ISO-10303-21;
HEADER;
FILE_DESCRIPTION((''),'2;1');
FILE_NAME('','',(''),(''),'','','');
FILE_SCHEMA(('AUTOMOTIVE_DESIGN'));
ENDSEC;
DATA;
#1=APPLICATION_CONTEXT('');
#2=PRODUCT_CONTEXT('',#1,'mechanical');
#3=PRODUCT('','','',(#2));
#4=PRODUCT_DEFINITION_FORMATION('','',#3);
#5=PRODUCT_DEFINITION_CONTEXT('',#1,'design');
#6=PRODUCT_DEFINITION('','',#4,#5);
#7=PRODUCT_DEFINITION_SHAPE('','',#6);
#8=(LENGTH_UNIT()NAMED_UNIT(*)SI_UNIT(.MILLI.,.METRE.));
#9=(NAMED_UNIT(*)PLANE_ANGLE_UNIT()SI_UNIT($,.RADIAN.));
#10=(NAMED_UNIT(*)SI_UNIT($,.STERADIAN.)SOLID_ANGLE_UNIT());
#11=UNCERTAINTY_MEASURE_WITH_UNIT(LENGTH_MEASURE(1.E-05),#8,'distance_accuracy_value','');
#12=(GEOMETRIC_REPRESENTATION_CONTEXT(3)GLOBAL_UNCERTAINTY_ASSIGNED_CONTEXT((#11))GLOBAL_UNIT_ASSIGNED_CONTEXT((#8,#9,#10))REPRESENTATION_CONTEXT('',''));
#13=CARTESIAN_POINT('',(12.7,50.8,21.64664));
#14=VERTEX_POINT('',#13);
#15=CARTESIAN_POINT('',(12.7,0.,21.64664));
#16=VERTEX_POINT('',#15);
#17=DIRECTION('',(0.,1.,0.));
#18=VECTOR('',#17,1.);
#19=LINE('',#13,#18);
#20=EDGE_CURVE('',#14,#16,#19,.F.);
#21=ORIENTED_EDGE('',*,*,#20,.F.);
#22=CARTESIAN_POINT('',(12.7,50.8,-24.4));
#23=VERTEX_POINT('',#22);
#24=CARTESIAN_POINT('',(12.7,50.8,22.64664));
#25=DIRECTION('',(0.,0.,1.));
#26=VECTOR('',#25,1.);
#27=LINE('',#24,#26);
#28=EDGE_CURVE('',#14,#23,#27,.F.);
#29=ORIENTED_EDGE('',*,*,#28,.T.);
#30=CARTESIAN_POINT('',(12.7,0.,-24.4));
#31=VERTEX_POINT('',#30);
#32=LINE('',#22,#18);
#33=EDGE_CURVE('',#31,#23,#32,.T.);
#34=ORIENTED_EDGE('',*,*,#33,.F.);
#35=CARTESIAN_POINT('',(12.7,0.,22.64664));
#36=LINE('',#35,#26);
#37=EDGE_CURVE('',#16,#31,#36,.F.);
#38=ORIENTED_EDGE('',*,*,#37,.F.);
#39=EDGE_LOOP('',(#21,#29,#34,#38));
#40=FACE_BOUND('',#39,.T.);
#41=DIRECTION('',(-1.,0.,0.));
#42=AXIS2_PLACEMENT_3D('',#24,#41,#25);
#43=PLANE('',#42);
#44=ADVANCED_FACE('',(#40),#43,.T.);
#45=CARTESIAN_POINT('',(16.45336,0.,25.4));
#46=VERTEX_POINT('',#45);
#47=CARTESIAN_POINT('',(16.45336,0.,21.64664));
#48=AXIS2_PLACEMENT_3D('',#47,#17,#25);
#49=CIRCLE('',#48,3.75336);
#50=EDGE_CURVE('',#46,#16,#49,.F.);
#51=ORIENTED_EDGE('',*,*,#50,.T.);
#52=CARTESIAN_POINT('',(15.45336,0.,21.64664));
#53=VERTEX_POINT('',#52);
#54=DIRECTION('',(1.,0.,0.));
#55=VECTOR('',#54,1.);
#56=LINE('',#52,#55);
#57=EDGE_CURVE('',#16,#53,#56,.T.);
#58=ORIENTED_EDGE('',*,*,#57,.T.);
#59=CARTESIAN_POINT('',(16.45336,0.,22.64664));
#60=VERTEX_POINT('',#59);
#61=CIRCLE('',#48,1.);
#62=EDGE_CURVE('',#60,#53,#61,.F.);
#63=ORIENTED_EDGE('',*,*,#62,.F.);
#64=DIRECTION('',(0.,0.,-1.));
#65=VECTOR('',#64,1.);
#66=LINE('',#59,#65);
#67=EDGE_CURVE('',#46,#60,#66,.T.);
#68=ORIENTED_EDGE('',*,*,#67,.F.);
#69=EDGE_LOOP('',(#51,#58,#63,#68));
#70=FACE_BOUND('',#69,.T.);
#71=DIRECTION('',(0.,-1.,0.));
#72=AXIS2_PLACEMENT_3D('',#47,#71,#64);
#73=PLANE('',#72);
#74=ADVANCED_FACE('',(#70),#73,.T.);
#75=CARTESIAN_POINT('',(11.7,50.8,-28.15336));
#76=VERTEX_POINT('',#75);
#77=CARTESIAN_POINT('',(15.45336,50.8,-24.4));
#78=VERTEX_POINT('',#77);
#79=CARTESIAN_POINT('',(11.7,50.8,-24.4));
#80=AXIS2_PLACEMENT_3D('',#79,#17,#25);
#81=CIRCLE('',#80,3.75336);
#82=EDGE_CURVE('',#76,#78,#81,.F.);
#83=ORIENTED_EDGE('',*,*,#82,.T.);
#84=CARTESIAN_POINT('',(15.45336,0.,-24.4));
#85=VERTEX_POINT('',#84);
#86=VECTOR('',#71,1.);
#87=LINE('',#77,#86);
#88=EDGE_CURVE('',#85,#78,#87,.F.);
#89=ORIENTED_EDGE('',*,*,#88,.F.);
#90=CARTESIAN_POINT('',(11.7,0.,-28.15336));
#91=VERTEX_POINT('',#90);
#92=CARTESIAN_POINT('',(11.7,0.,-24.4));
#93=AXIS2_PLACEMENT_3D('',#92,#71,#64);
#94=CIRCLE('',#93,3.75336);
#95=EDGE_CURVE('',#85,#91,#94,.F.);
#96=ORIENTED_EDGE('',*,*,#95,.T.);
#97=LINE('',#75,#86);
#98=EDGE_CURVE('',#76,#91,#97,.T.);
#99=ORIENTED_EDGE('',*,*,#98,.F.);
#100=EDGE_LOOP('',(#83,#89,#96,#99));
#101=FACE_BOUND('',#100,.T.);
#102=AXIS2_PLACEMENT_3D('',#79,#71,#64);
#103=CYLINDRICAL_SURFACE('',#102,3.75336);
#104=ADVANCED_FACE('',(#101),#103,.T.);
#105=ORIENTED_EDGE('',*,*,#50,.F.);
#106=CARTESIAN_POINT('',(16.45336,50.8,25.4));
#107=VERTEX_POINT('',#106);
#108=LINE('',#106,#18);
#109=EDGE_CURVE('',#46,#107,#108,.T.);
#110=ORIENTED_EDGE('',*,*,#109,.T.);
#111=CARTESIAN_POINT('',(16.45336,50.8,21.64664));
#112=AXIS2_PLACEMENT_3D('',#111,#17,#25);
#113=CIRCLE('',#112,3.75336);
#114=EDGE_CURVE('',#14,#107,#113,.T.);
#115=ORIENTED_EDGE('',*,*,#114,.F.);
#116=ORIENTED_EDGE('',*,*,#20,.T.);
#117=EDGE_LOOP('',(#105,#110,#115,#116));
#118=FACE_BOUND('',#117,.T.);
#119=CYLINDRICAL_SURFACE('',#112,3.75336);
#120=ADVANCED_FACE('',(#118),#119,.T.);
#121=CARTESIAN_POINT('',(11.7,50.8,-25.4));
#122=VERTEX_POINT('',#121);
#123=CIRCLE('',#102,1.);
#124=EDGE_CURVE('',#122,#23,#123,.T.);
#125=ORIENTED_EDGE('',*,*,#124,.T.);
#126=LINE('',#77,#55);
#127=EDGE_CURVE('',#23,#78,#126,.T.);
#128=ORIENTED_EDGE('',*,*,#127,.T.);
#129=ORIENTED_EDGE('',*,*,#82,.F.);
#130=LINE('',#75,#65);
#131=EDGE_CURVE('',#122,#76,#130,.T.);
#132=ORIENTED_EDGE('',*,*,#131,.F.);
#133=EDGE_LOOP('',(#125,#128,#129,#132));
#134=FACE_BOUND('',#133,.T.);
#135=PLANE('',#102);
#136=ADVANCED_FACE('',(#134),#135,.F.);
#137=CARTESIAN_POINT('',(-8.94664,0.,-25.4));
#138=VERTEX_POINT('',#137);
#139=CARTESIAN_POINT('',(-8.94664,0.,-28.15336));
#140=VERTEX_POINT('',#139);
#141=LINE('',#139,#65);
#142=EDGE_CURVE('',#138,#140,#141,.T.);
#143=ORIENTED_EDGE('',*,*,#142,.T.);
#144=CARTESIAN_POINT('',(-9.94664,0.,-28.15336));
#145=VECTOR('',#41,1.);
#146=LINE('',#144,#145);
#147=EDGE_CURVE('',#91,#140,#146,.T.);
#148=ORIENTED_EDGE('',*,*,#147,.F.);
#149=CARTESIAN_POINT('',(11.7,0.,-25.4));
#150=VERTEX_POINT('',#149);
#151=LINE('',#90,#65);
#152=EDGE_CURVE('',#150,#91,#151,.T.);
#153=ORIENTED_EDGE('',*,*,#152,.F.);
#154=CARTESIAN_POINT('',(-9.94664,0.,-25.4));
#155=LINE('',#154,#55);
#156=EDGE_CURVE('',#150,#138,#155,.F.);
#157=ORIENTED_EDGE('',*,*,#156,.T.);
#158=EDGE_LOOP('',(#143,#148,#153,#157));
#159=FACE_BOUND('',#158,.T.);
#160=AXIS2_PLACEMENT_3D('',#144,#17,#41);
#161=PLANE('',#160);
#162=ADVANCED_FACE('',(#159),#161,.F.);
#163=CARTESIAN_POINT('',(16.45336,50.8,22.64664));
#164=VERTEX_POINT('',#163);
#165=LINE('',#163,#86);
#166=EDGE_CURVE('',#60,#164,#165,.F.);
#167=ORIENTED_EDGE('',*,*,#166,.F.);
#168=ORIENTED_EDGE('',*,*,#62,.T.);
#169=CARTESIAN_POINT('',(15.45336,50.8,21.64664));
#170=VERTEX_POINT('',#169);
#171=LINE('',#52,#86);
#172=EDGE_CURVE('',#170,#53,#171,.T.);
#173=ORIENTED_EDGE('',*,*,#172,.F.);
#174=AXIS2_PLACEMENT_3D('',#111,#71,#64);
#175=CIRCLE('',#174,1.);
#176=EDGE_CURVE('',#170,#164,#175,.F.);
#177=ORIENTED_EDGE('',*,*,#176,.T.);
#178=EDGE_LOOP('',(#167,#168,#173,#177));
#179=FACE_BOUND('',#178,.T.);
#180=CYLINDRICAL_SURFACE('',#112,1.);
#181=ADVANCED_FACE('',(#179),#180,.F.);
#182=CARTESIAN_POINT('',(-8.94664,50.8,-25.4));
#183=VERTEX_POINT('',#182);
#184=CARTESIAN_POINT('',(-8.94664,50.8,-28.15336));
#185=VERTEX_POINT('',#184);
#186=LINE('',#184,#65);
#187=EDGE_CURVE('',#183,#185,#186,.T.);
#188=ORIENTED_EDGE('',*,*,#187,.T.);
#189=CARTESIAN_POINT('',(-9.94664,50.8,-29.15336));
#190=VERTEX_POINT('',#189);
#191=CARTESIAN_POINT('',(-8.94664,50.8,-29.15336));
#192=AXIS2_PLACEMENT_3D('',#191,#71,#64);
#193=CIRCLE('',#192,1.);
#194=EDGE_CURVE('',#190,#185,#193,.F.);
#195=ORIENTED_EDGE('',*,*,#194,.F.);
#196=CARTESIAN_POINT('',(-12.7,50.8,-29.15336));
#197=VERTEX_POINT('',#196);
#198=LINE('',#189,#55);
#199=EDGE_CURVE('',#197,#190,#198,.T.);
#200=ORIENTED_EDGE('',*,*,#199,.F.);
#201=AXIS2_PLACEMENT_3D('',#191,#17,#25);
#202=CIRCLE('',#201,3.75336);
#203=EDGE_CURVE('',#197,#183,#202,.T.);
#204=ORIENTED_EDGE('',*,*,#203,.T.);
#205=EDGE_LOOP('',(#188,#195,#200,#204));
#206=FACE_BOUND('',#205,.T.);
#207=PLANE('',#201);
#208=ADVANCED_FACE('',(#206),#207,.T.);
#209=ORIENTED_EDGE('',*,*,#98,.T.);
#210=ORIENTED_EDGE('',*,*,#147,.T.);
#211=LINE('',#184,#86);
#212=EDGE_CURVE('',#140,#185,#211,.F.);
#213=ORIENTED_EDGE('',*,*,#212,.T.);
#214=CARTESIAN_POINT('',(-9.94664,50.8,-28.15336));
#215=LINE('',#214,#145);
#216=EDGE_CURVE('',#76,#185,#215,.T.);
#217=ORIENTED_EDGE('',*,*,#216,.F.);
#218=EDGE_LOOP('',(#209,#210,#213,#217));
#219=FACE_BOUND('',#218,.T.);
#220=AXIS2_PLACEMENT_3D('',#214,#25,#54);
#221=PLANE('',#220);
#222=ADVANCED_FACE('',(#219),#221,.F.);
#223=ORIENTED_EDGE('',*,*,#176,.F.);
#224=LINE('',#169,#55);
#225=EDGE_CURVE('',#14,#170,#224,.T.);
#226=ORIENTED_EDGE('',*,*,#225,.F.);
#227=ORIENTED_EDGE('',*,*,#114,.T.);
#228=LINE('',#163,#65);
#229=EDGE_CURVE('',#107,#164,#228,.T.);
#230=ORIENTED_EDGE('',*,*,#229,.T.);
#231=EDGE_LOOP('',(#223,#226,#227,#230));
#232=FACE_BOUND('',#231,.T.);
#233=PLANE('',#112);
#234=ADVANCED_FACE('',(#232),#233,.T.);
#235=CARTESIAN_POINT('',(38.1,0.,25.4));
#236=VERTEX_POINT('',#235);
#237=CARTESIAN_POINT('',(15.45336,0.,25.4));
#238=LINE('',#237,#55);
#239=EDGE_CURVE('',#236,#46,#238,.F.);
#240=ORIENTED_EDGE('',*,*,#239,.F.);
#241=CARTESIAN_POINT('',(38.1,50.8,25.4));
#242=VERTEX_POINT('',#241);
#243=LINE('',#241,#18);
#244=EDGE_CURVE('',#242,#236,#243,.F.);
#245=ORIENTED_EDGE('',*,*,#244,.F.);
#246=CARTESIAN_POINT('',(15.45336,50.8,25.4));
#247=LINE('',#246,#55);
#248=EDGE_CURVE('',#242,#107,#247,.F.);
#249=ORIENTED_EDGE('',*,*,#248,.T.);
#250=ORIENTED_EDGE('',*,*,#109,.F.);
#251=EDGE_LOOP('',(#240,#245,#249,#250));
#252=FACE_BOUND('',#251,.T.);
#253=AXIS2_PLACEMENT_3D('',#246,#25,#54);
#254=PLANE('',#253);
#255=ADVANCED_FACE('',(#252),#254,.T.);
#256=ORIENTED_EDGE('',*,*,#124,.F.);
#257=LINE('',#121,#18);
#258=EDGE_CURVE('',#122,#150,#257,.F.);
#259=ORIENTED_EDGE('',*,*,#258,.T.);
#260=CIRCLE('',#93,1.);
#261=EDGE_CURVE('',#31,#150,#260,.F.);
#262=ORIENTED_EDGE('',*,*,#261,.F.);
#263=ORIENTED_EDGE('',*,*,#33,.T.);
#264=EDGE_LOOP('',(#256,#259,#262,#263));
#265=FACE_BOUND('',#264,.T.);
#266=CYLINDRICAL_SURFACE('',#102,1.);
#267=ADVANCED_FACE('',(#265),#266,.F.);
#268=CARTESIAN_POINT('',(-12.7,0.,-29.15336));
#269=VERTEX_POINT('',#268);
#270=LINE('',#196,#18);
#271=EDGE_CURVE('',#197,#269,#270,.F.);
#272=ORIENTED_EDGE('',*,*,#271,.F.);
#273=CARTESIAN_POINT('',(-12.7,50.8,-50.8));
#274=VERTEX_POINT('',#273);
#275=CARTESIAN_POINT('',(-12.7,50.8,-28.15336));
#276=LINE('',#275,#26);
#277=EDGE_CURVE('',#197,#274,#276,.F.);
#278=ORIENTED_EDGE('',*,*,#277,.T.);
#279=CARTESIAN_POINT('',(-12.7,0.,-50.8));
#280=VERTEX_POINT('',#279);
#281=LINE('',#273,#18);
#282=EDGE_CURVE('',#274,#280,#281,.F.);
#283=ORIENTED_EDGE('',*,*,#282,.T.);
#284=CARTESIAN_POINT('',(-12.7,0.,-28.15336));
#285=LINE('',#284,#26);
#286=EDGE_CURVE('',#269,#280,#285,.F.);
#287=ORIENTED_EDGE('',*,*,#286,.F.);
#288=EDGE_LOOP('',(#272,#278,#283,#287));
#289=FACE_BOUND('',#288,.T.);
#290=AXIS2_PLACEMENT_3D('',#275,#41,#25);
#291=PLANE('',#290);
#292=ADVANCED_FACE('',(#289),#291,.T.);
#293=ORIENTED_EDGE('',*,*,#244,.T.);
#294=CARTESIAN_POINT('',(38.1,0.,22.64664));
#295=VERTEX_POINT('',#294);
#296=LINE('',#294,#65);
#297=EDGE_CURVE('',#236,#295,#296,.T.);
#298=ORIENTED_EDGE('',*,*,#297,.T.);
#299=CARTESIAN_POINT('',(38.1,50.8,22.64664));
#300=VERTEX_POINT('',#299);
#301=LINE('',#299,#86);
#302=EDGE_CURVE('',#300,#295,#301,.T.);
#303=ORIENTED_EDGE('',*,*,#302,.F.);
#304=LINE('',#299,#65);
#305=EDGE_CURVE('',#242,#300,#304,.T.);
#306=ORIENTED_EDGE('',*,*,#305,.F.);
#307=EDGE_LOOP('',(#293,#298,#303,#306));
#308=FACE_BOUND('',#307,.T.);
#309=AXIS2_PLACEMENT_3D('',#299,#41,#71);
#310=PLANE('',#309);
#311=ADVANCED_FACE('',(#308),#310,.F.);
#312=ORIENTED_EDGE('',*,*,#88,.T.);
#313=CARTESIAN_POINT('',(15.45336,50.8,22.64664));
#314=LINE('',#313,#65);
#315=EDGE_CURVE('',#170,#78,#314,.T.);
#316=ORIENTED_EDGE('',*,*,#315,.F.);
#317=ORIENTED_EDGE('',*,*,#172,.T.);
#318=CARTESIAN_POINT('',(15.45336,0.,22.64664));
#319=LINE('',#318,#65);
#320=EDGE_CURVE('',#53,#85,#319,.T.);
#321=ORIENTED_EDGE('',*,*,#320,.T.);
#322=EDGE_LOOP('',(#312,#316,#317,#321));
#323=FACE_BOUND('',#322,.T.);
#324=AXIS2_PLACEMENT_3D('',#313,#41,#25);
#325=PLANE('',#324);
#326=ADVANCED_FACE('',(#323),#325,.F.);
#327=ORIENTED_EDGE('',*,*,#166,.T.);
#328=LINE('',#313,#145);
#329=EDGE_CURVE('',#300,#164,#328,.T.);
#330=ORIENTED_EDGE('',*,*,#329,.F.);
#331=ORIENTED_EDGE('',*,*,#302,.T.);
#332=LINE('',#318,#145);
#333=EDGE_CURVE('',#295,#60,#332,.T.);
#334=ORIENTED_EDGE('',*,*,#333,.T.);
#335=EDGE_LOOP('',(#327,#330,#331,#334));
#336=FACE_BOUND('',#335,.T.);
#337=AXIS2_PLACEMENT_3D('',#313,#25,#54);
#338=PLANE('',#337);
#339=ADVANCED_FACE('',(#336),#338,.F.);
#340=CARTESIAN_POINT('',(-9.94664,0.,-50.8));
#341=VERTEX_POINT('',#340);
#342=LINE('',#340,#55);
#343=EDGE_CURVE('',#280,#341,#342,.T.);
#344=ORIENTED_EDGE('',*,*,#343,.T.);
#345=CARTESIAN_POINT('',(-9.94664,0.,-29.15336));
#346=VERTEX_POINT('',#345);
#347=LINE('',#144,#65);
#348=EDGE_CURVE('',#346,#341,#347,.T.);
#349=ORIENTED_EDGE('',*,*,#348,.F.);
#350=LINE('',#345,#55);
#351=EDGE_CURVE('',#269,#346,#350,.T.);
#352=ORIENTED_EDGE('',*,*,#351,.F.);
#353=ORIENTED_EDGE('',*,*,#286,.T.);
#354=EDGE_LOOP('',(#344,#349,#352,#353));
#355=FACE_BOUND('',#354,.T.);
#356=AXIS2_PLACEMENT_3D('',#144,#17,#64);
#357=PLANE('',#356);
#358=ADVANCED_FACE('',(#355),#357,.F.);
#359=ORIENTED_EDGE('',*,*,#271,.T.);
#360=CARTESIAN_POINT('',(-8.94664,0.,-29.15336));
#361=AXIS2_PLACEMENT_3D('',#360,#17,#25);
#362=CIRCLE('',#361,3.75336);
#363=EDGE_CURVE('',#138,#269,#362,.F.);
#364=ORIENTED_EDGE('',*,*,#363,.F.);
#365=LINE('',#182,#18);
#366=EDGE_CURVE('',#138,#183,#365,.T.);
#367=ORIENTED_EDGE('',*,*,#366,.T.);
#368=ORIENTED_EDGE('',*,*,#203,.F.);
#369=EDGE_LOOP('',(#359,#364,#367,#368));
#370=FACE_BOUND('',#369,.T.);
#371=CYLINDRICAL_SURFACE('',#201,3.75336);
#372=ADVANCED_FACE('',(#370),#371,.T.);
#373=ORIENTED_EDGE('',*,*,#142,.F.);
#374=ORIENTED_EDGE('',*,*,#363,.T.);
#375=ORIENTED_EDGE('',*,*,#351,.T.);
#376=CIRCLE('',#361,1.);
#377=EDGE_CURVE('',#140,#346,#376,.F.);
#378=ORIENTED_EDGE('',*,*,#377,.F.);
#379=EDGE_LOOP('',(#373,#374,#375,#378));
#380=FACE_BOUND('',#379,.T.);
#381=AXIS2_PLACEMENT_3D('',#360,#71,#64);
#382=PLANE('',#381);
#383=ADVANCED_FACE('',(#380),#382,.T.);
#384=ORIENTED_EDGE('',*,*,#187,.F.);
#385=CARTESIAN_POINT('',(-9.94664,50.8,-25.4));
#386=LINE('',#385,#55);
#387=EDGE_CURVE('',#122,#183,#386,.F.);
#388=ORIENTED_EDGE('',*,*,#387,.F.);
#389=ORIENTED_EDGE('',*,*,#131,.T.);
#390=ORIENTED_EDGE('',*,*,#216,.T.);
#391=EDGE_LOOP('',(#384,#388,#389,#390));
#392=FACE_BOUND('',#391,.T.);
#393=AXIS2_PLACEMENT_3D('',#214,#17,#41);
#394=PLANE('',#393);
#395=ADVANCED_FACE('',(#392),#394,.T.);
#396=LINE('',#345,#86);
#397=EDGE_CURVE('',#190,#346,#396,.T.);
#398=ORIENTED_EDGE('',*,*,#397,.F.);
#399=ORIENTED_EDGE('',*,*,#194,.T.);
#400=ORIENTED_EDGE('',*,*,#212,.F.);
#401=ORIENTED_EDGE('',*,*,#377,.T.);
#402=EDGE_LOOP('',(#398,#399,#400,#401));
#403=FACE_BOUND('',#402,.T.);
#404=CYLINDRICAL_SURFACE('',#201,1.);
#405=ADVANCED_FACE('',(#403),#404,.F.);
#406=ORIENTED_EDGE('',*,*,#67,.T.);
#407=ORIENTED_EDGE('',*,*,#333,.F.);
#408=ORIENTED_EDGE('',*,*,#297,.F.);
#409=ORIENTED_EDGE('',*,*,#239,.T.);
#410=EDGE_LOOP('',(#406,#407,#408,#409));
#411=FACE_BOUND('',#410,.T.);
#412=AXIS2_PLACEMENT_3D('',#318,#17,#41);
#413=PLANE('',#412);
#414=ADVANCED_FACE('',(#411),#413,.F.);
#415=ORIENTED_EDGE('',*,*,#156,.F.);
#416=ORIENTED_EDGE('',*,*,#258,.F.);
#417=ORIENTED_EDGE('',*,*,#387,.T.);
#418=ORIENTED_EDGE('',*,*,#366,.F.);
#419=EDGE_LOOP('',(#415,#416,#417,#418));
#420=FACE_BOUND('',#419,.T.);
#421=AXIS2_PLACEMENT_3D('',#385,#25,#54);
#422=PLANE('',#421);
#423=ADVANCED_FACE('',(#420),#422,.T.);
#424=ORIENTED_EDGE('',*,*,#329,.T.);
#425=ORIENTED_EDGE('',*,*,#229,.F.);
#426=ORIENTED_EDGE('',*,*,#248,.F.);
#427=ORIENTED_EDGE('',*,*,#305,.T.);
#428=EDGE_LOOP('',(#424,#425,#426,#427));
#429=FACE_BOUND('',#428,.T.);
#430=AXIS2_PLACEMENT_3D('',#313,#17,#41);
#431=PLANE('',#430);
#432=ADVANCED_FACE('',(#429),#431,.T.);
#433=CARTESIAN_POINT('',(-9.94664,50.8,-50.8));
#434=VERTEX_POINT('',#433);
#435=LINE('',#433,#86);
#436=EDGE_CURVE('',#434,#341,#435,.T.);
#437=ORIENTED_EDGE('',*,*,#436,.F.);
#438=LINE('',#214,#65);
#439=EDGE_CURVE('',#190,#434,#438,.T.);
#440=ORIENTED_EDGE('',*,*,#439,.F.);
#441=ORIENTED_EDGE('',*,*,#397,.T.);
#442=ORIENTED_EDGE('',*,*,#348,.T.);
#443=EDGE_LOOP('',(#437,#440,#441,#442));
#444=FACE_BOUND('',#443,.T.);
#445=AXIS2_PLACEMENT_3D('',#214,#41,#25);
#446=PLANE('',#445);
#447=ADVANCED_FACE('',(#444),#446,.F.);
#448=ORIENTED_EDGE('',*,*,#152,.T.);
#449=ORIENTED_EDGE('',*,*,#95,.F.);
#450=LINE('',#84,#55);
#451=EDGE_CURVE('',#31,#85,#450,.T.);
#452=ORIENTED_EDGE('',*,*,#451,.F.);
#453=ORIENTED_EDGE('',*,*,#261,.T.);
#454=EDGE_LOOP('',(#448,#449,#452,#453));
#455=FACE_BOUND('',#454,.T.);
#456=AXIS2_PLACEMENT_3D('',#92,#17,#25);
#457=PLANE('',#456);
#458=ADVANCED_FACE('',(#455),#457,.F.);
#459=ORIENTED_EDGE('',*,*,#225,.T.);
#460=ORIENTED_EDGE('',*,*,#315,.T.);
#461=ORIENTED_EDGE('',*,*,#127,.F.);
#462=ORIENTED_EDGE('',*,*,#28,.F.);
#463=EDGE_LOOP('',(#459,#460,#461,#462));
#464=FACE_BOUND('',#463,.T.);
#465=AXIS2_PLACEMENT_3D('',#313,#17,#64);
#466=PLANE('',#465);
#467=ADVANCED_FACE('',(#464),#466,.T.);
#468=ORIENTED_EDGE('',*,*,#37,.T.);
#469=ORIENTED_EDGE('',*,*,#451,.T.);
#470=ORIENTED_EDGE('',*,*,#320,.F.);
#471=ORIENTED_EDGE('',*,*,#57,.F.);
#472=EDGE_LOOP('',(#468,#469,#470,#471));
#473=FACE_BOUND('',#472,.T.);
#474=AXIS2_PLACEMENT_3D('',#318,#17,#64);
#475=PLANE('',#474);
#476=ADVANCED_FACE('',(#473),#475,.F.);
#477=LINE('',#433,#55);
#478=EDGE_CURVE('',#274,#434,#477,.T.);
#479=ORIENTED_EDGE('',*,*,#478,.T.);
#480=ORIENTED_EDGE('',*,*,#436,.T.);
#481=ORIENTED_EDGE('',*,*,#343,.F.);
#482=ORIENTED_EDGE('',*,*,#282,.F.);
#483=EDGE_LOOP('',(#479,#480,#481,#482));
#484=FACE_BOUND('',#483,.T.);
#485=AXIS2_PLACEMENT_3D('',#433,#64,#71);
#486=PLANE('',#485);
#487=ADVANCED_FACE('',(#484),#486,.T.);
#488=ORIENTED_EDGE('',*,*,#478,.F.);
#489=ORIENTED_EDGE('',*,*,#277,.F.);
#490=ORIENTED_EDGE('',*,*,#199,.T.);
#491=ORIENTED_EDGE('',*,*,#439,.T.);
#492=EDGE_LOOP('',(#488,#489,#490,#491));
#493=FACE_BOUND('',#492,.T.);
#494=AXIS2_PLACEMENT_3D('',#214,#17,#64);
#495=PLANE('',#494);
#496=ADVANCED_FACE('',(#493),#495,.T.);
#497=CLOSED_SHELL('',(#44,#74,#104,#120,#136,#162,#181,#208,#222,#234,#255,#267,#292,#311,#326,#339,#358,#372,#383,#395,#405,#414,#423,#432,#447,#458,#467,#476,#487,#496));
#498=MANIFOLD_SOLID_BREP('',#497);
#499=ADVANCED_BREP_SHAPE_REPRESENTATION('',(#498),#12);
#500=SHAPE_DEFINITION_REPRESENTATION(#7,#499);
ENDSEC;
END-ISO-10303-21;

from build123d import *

# Parameters (mm, degrees)
BOSS_EXTRUDE1_DEPTH    = 50.8
CONVERT_SOLID3_DEPTH   = 50.8
CONVERT_SOLID3_2_DEPTH = 50.8


# Read off the part's stored shape, not the designer's step: Convert-Solid3
with BuildPart() as part:
    # Sketch1 → Boss-Extrude1 (new body)
    with BuildSketch(Plane(origin=(0, 0, 0), x_dir=(1, 0, 0), z_dir=(0, 1, 0))):
        Polygon((-9.94664, 28.15336), (15.45336, 28.15336), (15.45336, -22.64664), (38.1, -22.64664), (38.1, -25.4), (12.7, -25.4), (12.7, 25.4), (-12.7, 25.4), (-12.7, 50.8), (-9.94664, 50.8), align=None)
    extrude(amount=BOSS_EXTRUDE1_DEPTH)

    # Convert-Solid3 outline → Convert-Solid3 (cut)
    with BuildSketch(Plane(origin=(0, 0, 0), x_dir=(1, 0, 0), z_dir=(0, 1, 0))):
        with BuildLine():
            ThreePointArc((11.7, 28.15336), (14.354026308, 27.054026308), (15.45336, 24.4))
            Line((15.45336, 24.4), (15.45336, 28.15336))
            Line((15.45336, 28.15336), (11.7, 28.15336))
        make_face()
        with BuildLine():
            Line((-12.7, 25.4), (-8.94664, 25.4))
            ThreePointArc((-8.94664, 25.4), (-11.600666308, 26.499333692), (-12.7, 29.15336))
            Line((-12.7, 29.15336), (-12.7, 25.4))
        make_face()
        with BuildLine():
            ThreePointArc((16.45336, -25.4), (13.799333692, -24.300666308), (12.7, -21.64664))
            Line((12.7, -21.64664), (12.7, -25.4))
            Line((12.7, -25.4), (16.45336, -25.4))
        make_face()
    extrude(amount=CONVERT_SOLID3_DEPTH, mode=Mode.SUBTRACT)

    # Convert-Solid3 2 outline → Convert-Solid3 2 (add)
    with BuildSketch(Plane(origin=(0, 0, 0), x_dir=(1, 0, 0), z_dir=(0, 1, 0))):
        with BuildLine():
            Line((-9.94664, 28.15336), (-8.94664, 28.15336))
            ThreePointArc((-8.94664, 28.15336), (-9.653746781, 28.446253219), (-9.94664, 29.15336))
            Line((-9.94664, 29.15336), (-9.94664, 28.15336))
        make_face()
        with BuildLine():
            ThreePointArc((16.45336, -22.64664), (15.746253219, -22.353746781), (15.45336, -21.64664))
            Line((15.45336, -21.64664), (15.45336, -22.64664))
            Line((15.45336, -22.64664), (16.45336, -22.64664))
        make_face()
        with BuildLine():
            ThreePointArc((11.7, 25.4), (12.407106781, 25.107106781), (12.7, 24.4))
            Line((12.7, 24.4), (12.7, 25.4))
            Line((12.7, 25.4), (11.7, 25.4))
        make_face()
    extrude(amount=CONVERT_SOLID3_2_DEPTH)


solid = part.part
